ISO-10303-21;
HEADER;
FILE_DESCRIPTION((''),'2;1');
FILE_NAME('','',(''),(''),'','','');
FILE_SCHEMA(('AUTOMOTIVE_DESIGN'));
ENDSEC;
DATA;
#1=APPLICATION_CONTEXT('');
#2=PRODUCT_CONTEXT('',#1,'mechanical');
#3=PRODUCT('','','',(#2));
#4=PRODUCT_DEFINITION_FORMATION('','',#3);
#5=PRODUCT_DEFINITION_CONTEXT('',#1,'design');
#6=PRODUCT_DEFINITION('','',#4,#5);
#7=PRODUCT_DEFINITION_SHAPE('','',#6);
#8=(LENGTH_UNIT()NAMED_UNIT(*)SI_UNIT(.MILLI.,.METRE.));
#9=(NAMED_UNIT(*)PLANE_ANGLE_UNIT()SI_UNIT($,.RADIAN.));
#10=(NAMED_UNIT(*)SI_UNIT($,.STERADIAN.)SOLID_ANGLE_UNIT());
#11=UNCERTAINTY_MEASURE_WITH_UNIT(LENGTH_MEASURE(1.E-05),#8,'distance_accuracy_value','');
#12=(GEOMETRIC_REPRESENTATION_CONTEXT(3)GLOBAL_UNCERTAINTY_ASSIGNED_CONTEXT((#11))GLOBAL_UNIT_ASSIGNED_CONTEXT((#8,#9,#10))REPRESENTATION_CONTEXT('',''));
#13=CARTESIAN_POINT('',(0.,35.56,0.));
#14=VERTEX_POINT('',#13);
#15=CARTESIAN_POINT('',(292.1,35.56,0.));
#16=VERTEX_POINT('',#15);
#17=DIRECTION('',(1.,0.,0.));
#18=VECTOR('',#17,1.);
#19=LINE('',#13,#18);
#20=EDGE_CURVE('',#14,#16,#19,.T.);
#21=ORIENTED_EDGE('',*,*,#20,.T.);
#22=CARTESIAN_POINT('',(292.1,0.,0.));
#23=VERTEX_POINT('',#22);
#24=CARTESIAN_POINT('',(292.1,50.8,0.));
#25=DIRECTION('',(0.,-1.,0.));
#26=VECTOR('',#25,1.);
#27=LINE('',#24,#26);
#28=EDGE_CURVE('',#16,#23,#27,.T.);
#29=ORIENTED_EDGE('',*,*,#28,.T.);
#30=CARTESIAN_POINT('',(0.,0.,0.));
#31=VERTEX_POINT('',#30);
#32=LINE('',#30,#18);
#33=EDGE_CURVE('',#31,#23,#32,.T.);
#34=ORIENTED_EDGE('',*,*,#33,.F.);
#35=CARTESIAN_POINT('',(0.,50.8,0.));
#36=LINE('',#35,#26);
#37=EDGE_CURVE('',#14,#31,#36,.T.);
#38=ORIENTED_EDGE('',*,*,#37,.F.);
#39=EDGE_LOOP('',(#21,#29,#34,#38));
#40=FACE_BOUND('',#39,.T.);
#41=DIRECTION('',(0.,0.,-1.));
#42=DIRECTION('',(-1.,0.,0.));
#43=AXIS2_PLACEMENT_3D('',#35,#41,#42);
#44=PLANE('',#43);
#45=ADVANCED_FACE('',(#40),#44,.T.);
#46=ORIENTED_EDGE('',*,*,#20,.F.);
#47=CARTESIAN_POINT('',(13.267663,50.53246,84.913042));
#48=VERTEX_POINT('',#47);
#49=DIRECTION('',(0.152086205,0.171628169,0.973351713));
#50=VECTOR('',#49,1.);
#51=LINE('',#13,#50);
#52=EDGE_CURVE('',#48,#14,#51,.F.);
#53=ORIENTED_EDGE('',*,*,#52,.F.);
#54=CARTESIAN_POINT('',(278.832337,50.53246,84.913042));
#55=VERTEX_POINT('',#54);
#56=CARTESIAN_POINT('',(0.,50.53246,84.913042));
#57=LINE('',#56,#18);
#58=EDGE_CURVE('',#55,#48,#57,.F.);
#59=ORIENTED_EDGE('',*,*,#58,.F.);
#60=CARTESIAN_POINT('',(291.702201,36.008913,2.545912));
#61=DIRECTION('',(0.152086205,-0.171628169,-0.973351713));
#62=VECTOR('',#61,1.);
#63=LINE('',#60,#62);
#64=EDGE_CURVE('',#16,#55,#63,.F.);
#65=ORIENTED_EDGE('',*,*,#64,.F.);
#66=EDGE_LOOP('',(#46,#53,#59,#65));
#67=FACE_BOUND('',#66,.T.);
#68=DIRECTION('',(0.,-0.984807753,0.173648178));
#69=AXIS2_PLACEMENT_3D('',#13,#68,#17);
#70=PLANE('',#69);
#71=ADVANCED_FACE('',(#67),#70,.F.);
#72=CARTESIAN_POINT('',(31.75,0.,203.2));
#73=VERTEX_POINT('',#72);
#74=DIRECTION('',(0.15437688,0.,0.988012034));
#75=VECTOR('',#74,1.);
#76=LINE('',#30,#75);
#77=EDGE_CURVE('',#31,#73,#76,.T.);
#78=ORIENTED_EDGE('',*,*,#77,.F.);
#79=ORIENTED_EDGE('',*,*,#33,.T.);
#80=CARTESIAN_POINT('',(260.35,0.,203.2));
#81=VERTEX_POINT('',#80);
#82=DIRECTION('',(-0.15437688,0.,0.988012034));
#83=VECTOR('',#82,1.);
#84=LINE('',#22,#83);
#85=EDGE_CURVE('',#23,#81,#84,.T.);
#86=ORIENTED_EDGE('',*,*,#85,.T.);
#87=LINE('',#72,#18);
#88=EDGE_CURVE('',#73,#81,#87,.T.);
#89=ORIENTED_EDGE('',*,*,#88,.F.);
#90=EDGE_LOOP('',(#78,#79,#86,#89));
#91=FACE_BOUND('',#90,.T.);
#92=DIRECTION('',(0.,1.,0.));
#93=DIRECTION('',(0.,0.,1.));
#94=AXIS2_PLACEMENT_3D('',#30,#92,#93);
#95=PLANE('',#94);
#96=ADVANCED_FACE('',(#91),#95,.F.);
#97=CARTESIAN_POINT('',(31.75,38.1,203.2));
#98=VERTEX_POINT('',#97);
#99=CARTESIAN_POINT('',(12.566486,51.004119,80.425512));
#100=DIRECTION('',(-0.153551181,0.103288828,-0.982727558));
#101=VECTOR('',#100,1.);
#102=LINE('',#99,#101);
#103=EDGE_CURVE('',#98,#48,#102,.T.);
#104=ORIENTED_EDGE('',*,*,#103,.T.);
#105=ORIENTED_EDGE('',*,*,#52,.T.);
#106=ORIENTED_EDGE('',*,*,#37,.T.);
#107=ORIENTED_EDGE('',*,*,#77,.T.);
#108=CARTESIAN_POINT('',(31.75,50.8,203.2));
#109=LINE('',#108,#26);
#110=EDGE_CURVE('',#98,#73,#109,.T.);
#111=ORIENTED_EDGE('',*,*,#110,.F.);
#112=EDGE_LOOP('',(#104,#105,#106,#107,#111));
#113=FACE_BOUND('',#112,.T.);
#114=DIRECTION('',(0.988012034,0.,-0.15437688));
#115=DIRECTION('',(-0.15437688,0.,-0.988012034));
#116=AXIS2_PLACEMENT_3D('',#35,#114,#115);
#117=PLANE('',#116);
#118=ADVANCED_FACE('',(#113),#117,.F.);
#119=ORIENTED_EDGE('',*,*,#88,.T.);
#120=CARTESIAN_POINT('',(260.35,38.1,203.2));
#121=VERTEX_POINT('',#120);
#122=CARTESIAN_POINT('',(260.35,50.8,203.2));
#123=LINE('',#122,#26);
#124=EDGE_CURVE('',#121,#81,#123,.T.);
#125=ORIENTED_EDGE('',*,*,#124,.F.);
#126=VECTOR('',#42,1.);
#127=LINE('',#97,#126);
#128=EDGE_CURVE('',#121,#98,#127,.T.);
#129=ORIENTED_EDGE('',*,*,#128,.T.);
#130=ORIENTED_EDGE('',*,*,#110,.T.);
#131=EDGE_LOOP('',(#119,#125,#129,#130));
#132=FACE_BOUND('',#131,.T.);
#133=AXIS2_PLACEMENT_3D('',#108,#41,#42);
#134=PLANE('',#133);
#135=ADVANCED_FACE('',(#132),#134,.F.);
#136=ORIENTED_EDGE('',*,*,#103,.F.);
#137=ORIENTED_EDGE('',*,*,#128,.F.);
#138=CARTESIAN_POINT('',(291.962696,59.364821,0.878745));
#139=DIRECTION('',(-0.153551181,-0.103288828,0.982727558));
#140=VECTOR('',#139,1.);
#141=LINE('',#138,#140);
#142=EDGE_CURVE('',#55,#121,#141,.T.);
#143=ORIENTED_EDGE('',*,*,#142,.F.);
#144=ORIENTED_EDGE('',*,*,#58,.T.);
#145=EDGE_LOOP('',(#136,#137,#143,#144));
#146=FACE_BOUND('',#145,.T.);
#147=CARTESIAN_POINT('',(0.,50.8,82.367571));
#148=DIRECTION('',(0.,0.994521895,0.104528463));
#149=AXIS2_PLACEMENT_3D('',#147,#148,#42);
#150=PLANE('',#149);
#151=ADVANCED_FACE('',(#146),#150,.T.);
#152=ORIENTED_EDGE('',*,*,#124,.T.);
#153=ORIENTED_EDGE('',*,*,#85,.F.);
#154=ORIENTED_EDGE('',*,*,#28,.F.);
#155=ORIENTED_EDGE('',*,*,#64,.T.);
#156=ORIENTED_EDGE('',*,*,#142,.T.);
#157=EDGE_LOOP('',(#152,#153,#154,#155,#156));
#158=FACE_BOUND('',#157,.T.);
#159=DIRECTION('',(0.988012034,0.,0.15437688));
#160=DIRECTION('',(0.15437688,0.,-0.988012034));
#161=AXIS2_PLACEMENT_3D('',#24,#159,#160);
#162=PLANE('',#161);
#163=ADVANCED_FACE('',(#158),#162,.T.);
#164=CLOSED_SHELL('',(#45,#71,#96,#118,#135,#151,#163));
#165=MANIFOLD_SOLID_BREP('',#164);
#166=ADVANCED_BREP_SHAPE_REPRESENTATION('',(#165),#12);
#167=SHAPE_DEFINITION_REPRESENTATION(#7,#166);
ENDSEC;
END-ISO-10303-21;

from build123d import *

# Parameters (mm, degrees)
BOSS_EXTRUDE1_DEPTH = 50.8
CHAMFER1_SIZE       = 12.7
CHAMFER1_SIZE2      = 120.832428569
CHAMFER2_SIZE       = 86.430334931
CHAMFER2_SIZE_2     = 15.24


with BuildPart() as part:
    # Sketch1 → Boss-Extrude1 (new body)
    with BuildSketch(Plane(origin=(0, 0, 0), x_dir=(1, 0, 0), z_dir=(0, 1, 0))):
        Polygon((0, 0), (292.1, 0), (260.35, -203.2), (31.75, -203.2), align=None)
    extrude(amount=BOSS_EXTRUDE1_DEPTH)

    # Chamfer1
    chamfer1_edges = [part.edges().sort_by_distance(p)[0] for p in [
        (146.05, 50.8, 203.2),
    ]]
    chamfer1_side = [part.faces().sort_by_distance(p)[0] for p in [
        (146.05, 25.4, 203.2),
    ]]
    chamfer(chamfer1_edges, length=CHAMFER1_SIZE, length2=CHAMFER1_SIZE2, reference=chamfer1_side[0])

    # Chamfer2
    # the kernel refuses this chamfer: 86.430334931, 15.24 mm, written as the material it takes off along each edge
    with BuildSketch(Plane(origin=(-224.592578506, 50.8, 0), x_dir=(0, 0.006682531656101609, 0.9999776716360547), z_dir=(1, 0, 0))) as chamfer2_piece_1:
        Polygon((CHAMFER2_SIZE * 0.999977671636, CHAMFER2_SIZE * 0.0066825316561), (-CHAMFER2_SIZE_2 * 0.0066825316561, CHAMFER2_SIZE_2 * 0.999977671636), (0, 0), align=None)
    extrude(amount=741.285157012, mode=Mode.SUBTRACT)


solid = part.part
